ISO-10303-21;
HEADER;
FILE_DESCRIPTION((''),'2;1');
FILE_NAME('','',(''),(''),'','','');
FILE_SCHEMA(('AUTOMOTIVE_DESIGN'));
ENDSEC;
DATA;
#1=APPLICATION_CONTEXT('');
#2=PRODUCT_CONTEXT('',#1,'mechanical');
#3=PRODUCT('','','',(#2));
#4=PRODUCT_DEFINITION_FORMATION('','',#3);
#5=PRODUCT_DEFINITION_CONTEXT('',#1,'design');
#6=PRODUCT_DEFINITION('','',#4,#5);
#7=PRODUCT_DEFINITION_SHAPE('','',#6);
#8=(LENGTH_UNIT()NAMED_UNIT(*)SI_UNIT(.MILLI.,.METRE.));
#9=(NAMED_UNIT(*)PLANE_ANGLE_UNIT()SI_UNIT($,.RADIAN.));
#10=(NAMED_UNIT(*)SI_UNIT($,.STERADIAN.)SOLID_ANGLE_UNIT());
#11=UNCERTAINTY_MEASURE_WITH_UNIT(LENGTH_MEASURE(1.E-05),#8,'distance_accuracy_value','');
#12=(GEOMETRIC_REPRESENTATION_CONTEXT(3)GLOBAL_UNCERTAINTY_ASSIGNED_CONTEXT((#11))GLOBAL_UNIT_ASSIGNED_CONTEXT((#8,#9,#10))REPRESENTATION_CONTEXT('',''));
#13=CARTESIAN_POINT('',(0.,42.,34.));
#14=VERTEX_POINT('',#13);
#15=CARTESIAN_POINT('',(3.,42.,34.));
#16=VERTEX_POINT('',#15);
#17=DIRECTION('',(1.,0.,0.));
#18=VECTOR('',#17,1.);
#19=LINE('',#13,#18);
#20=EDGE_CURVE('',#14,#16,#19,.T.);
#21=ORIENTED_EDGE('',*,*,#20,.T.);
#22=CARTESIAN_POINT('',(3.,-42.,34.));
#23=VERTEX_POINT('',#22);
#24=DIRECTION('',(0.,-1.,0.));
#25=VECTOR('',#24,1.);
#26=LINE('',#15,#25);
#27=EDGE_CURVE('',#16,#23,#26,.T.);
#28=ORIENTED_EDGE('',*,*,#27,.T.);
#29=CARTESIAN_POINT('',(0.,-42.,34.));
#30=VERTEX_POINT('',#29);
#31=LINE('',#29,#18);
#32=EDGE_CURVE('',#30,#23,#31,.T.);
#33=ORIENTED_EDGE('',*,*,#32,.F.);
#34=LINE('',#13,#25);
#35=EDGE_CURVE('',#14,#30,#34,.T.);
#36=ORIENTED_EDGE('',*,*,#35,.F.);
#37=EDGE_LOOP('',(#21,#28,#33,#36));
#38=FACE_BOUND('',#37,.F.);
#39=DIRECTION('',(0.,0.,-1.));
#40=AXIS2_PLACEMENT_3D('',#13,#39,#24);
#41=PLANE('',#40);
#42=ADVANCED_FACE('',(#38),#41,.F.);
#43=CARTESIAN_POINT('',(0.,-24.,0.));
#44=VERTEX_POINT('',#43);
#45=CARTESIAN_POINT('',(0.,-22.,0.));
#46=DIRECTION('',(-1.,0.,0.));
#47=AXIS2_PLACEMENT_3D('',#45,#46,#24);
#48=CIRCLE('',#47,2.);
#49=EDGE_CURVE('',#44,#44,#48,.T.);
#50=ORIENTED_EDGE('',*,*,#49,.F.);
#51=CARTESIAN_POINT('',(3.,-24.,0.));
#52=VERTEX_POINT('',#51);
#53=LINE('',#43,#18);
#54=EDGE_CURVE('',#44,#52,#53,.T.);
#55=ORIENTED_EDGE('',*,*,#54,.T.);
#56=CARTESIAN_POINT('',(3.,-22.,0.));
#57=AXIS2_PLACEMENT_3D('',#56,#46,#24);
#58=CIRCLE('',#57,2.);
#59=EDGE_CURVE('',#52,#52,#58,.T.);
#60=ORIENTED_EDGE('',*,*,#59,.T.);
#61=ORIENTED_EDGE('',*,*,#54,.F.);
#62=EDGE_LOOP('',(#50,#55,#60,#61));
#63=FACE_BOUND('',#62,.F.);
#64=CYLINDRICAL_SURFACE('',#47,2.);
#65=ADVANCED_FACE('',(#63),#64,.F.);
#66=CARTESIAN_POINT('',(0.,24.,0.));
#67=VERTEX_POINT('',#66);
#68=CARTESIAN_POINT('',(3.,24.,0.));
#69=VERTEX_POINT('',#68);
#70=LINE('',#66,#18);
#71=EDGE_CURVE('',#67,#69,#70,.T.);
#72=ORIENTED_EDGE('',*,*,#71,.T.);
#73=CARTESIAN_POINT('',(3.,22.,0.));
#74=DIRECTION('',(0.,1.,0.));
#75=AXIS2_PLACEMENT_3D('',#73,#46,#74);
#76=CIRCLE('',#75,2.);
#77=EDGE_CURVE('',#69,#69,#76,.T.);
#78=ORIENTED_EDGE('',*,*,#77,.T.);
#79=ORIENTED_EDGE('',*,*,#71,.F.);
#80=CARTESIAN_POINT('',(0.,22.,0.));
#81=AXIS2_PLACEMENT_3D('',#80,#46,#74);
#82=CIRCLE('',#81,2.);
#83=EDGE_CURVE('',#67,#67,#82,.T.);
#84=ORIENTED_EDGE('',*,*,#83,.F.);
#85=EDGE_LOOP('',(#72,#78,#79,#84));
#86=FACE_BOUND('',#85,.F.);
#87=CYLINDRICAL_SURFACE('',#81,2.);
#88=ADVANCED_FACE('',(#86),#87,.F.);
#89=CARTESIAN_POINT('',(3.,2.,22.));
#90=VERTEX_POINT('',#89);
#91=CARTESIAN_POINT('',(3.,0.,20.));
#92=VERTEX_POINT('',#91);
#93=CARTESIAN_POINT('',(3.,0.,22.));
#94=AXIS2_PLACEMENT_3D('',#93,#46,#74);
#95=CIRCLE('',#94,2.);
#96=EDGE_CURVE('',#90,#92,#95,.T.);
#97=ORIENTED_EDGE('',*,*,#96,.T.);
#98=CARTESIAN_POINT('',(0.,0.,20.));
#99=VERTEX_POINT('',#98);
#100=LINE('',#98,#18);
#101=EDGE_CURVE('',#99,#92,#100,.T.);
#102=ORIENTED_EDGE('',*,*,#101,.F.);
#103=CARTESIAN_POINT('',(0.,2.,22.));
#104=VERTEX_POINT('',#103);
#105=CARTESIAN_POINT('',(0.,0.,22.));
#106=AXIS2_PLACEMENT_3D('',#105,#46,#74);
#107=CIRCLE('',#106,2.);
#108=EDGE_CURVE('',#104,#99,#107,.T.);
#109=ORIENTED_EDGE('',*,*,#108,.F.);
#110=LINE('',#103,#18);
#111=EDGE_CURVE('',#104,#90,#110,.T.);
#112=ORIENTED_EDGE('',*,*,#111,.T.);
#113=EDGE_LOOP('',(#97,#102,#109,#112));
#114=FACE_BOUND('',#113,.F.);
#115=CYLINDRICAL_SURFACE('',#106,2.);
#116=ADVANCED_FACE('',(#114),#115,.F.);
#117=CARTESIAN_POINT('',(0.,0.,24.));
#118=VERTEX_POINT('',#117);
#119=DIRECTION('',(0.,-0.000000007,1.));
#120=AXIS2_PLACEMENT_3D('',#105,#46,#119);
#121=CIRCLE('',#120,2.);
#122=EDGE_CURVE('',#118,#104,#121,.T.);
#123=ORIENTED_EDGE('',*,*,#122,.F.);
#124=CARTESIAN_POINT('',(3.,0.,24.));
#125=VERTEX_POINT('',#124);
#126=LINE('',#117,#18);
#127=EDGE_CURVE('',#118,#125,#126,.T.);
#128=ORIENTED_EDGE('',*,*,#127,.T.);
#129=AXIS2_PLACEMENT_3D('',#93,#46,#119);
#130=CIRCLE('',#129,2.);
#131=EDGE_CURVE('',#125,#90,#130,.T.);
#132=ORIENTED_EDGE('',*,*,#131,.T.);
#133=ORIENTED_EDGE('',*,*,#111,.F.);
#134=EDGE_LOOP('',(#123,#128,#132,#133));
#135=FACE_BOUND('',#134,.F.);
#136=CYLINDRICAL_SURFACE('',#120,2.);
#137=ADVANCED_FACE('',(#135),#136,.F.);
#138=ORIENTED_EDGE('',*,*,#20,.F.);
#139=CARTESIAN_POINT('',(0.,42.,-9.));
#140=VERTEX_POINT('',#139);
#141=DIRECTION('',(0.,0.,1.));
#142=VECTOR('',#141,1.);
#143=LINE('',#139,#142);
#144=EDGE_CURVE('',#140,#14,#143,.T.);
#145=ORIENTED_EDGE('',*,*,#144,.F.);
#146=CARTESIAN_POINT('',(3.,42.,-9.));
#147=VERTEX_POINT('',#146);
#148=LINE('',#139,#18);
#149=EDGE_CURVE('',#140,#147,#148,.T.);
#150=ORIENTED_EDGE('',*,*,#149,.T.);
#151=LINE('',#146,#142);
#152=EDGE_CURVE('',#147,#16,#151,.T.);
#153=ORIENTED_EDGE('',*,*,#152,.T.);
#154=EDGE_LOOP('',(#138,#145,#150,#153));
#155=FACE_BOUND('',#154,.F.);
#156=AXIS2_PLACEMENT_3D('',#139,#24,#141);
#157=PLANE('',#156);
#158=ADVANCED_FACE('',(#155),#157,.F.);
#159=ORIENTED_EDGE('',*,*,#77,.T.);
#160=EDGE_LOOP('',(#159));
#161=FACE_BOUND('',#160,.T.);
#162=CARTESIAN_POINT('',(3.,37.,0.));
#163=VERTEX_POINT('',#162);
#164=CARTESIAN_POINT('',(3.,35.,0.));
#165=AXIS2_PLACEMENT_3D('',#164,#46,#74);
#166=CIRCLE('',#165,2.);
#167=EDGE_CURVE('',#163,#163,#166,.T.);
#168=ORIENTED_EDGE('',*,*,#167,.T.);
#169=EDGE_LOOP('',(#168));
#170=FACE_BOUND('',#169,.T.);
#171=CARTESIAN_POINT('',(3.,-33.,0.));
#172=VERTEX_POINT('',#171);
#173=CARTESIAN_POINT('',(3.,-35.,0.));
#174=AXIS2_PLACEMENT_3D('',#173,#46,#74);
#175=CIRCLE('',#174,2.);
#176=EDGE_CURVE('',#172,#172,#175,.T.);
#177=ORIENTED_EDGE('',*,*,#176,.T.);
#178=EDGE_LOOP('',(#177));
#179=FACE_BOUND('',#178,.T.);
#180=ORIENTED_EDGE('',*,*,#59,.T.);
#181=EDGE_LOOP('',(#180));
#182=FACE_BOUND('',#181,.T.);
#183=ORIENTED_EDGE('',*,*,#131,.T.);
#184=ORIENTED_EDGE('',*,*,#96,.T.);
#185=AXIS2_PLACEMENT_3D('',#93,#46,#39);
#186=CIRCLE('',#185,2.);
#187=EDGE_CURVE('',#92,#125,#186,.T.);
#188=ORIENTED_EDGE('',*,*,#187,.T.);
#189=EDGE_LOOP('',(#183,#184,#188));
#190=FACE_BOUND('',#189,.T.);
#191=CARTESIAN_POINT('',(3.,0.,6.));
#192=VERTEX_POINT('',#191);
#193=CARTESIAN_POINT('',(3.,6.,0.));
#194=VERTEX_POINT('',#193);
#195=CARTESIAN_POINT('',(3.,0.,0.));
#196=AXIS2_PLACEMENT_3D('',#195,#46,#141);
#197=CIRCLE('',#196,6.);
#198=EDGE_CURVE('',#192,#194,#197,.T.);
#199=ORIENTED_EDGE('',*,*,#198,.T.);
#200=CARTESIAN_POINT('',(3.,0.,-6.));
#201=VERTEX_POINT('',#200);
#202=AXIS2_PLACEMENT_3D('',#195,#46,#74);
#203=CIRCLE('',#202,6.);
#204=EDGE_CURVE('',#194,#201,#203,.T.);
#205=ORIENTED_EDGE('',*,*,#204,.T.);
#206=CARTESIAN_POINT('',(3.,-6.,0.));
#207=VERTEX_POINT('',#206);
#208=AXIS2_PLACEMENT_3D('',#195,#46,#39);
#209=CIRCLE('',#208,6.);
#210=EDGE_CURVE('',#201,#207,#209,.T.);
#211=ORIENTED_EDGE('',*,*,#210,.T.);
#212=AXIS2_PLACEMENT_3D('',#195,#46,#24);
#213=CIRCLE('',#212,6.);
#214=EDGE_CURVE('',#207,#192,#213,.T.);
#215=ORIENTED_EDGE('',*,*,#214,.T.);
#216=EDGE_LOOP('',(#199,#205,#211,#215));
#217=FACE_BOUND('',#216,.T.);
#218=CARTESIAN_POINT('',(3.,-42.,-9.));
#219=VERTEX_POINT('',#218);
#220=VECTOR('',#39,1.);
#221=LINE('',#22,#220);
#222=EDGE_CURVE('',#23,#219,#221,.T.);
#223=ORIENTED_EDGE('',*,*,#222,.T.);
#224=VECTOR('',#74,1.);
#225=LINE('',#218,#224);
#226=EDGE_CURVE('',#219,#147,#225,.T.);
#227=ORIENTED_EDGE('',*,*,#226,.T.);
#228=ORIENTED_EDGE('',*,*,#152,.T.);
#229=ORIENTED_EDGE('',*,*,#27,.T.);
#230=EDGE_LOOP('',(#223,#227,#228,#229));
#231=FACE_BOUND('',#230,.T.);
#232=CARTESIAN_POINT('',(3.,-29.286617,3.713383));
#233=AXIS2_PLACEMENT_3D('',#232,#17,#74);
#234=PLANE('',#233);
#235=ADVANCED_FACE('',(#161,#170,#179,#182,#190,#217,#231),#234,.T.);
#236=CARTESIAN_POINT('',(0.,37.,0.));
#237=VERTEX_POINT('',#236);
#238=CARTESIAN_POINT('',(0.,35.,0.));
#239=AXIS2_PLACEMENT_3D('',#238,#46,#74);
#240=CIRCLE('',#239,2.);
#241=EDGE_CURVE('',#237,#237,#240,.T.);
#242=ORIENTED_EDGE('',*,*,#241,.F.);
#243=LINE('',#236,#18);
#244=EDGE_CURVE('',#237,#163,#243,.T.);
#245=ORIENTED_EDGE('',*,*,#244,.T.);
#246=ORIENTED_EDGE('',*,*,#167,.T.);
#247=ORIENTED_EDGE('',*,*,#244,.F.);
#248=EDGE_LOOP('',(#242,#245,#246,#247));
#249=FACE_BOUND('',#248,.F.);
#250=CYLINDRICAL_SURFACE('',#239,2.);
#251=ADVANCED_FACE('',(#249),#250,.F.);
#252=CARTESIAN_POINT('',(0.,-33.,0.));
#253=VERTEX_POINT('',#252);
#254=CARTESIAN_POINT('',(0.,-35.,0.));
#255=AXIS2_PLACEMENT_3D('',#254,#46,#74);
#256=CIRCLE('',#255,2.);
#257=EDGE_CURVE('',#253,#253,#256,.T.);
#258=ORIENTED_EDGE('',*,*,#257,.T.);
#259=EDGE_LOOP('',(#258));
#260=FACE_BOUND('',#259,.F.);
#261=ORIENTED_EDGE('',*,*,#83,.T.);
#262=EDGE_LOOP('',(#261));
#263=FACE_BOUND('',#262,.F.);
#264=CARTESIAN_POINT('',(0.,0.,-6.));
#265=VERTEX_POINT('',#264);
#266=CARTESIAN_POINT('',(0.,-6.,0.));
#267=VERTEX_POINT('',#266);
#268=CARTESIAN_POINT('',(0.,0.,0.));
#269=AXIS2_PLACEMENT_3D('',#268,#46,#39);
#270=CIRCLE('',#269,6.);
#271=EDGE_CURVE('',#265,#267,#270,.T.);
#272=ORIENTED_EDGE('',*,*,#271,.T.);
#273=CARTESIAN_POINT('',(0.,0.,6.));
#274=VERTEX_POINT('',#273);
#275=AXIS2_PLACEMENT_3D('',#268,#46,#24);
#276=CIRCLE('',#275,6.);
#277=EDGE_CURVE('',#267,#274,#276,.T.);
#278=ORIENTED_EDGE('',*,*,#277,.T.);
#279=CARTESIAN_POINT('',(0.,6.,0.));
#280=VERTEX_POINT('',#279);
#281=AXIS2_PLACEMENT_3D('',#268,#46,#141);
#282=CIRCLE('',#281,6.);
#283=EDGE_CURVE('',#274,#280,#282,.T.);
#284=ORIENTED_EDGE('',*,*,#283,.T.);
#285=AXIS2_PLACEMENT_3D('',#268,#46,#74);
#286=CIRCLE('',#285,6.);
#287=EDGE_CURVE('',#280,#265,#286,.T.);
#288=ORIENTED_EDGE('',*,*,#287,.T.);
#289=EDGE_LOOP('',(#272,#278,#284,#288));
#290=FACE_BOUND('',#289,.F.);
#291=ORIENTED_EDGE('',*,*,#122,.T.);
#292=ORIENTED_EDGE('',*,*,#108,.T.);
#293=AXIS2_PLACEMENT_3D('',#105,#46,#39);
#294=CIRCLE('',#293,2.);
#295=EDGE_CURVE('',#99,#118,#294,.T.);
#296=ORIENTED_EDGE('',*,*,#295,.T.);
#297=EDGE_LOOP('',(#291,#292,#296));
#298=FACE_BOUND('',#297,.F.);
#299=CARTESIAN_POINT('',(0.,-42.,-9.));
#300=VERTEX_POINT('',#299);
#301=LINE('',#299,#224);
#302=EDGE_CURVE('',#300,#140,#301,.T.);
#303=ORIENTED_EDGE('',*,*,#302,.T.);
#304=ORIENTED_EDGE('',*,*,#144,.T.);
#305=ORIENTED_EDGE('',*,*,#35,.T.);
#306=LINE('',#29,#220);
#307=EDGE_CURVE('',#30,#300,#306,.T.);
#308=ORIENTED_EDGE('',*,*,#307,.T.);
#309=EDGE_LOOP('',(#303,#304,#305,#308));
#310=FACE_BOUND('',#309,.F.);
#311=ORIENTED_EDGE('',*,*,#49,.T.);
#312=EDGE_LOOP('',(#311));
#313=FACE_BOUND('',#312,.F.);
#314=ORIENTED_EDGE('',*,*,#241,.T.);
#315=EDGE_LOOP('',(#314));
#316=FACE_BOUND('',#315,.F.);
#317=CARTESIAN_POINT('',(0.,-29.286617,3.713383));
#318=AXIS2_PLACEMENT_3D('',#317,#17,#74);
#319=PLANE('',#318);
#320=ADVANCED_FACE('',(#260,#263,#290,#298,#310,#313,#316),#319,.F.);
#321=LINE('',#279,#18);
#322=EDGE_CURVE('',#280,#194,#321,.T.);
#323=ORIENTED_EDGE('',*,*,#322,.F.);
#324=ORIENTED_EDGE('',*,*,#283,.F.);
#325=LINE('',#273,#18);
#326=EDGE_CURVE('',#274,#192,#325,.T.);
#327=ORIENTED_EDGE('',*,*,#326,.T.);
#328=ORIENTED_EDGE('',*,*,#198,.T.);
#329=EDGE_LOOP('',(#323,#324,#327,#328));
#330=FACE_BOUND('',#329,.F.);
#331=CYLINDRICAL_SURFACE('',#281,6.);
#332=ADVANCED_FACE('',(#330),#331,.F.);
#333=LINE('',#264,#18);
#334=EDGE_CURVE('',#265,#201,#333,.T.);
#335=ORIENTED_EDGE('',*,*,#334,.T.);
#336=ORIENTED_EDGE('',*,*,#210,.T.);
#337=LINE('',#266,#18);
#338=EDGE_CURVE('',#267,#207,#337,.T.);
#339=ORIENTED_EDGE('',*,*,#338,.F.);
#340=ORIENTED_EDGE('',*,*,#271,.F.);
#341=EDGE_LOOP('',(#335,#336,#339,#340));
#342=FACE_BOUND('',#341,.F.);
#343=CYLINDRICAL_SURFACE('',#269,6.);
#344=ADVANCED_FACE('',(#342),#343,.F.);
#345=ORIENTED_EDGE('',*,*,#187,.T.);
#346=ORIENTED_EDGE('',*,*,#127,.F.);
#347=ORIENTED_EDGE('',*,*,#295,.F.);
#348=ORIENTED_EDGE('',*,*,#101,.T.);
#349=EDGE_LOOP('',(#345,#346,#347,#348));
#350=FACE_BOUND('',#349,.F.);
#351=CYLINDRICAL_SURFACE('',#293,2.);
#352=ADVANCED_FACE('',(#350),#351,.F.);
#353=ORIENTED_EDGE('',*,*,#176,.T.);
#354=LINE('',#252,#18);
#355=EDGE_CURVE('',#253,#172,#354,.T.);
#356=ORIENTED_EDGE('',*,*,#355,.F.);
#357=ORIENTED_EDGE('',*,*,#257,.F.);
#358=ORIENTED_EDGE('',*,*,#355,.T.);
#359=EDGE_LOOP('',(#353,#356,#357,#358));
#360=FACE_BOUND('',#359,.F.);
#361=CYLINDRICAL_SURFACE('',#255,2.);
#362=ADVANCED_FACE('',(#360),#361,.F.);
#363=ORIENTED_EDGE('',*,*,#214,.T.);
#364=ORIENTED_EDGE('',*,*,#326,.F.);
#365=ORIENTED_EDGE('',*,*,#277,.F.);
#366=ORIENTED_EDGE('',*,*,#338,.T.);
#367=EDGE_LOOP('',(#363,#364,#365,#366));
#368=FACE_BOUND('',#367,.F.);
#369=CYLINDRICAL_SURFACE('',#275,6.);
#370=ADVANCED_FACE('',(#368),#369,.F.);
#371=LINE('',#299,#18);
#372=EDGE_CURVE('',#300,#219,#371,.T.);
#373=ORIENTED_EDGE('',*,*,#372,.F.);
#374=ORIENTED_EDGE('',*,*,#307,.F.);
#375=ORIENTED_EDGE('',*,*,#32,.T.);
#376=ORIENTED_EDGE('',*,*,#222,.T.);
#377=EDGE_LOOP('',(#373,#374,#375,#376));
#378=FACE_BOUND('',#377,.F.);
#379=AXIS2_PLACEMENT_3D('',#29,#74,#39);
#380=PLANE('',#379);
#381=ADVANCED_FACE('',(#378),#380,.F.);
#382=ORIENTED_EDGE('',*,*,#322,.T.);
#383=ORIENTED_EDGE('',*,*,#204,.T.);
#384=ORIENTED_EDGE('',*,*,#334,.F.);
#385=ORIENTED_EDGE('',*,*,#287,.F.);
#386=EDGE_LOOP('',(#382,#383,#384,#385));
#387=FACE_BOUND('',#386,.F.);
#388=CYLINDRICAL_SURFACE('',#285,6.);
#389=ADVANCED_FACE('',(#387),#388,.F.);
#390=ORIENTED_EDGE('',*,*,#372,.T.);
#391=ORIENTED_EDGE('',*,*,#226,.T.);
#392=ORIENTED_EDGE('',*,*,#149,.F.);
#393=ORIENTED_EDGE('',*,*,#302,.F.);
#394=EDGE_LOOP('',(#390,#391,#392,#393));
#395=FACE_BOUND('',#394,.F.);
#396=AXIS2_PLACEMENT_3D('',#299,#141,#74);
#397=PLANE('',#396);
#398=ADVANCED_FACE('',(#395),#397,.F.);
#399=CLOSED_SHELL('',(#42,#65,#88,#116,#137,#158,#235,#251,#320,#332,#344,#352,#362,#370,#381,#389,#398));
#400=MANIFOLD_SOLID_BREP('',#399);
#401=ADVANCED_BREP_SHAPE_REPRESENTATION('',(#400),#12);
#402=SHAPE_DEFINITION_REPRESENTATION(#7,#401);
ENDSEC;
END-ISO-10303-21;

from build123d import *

# Parameters (mm, degrees)
F1_DEPTH = 3


with BuildPart() as f1:
    # F0 (on Right) → F1 (new body)
    with BuildSketch(Plane.YZ):
        with BuildLine():
            Line((-33, 9), (-33, 0))
            Line((-33, 0), (-24, 0))
            ThreePointArc((-24, 0), (-26.6360389693, 6.3639610307), (-33, 9))
        make_face()
        with BuildLine():
            ThreePointArc((-37, 0), (-35, 2), (-33, 0))
            Line((-33, 0), (-33, 9))
            ThreePointArc((-33, 9), (-39.3639610307, 6.3639610307), (-42, 0))
            Line((-42, 0), (-37, 0))
        make_face()
        with BuildLine():
            Line((-24, 0), (-33, 0))
            Line((-33, 0), (-33, -9))
            ThreePointArc((-33, -9), (-26.6360389693, -6.3639610307), (-24, 0))
        make_face()
        with BuildLine():
            Line((-33, -9), (-33, 0))
            ThreePointArc((-33, 0), (-35, -2), (-37, 0))
            Line((-37, 0), (-42, 0))
            ThreePointArc((-42, 0), (-39.3639610307, -6.3639610307), (-33, -9))
        make_face()
        with BuildLine():
            ThreePointArc((-20, 0), (-22, -2), (-24, 0))
            ThreePointArc((-24, 0), (-26.6360389693, -6.3639610307), (-33, -9))
            Line((-33, -9), (-25, -9))
            Line((-25, -9), (-4.3588989435, -9))
            ThreePointArc((-4.3588989435, -9), (-8.4731632061, -5.310885546), (-10, 0))
            Line((-10, 0), (-20, 0))
        make_face()
        with BuildLine():
            ThreePointArc((-33, 9), (-26.6360389693, 6.3639610307), (-24, 0))
            ThreePointArc((-24, 0), (-22, 2), (-20, 0))
            Line((-20, 0), (-10, 0))
            ThreePointArc((-10, 0), (-7.0710678119, 7.0710678119), (0, 10))
            Line((0, 10), (0, 20))
            ThreePointArc((0, 20), (-2, 21.9999999928), (-1.44e-08, 24))
            ThreePointArc((-1.44e-08, 24), (-4.7434164964, 25.3514707334), (-8.0622577483, 29))
            Line((-8.0622577483, 29), (-9, 29))
            Line((-9, 29), (-9, 25))
            ThreePointArc((-9, 25), (-13.686291501, 13.686291501), (-25, 9))
            Line((-25, 9), (-33, 9))
        make_face()
        with BuildLine():
            ThreePointArc((-42, 0), (-39.3639610307, 6.3639610307), (-33, 9))
            Line((-33, 9), (-25, 9))
            ThreePointArc((-25, 9), (-13.686291501, 13.686291501), (-9, 25))
            Line((-9, 25), (-9, 29))
            Line((-9, 29), (-42, 29))
            Line((-42, 29), (-42, 0))
        make_face()
        with BuildLine():
            Line((-42, -9), (-33, -9))
            ThreePointArc((-33, -9), (-39.3639610307, -6.3639610307), (-42, 0))
            Line((-42, 0), (-42, -9))
        make_face()
        with BuildLine():
            ThreePointArc((0, 10), (-7.0710678119, 7.0710678119), (-10, 0))
            Line((-10, 0), (-6, 0))
            ThreePointArc((-6, 0), (-4.2426406871, 4.2426406871), (0, 6))
            Line((0, 6), (0, 10))
        make_face()
        with BuildLine():
            Line((-6, 0), (-10, 0))
            ThreePointArc((-10, 0), (-8.4731632061, -5.310885546), (-4.3588989435, -9))
            Line((-4.3588989435, -9), (0, -9))
            Line((0, -9), (0, -6))
            ThreePointArc((0, -6), (-4.2426406871, -4.2426406871), (-6, 0))
        make_face()
        with BuildLine():
            Line((-42, 34), (-42, 29))
            Line((-42, 29), (-9, 29))
            Line((-9, 29), (-9, 33))
            ThreePointArc((-9, 33), (-8.9860571774, 33.5007758031), (-8.94427191, 34))
            Line((-8.94427191, 34), (-42, 34))
        make_face()
        with BuildLine():
            ThreePointArc((10, 0), (7.0710678119, 7.0710678119), (0, 10))
            Line((0, 10), (0, 6))
            ThreePointArc((0, 6), (4.2426406871, 4.2426406871), (6, 0))
            Line((6, 0), (10, 0))
        make_face()
        with BuildLine():
            Line((0, 20), (0, 10))
            ThreePointArc((0, 10), (7.0710678119, 7.0710678119), (10, 0))
            Line((10, 0), (20, 0))
            ThreePointArc((20, 0), (22, 2), (24, 0))
            ThreePointArc((24, 0), (26.6360389693, 6.3639610307), (33, 9))
            Line((33, 9), (25, 9))
            ThreePointArc((25, 9), (13.686291501, 13.686291501), (9, 25))
            Line((9, 25), (9, 29))
            Line((9, 29), (8.0622577483, 29))
            ThreePointArc((8.0622577483, 29), (4.7434164841, 25.3514707258), (-1.44e-08, 24))
            ThreePointArc((-1.44e-08, 24), (1.4142135573, 23.4142135675), (2, 22))
            ThreePointArc((2, 22), (1.4142135624, 20.5857864376), (0, 20))
        make_face()
        with BuildLine():
            Line((-9, 33), (-9, 29))
            Line((-9, 29), (-8.0622577483, 29))
            ThreePointArc((-8.0622577483, 29), (-8.7624288794, 30.9457750531), (-9, 33))
        make_face()
        with BuildLine():
            Line((0, -6), (0, -9))
            Line((0, -9), (4.3588989435, -9))
            ThreePointArc((4.3588989435, -9), (8.4731632061, -5.310885546), (10, 0))
            Line((10, 0), (6, 0))
            ThreePointArc((6, 0), (4.2426406871, -4.2426406871), (0, -6))
        make_face()
        with BuildLine():
            Line((20, 0), (10, 0))
            ThreePointArc((10, 0), (8.4731632061, -5.310885546), (4.3588989435, -9))
            Line((4.3588989435, -9), (25, -9))
            Line((25, -9), (33, -9))
            ThreePointArc((33, -9), (26.6360389693, -6.3639610307), (24, 0))
            ThreePointArc((24, 0), (22, -2), (20, 0))
        make_face()
        with BuildLine():
            Line((0, 33), (-9, 33))
            ThreePointArc((-9, 33), (-8.7624288794, 30.9457750531), (-8.0622577483, 29))
            Line((-8.0622577483, 29), (0, 29))
            Line((0, 29), (0, 33))
        make_face()
        with BuildLine():
            ThreePointArc((-8.94427191, 34), (-8.9860571774, 33.5007758031), (-9, 33))
            Line((-9, 33), (0, 33))
            ThreePointArc((0, 33), (-1, 33.2679491924), (-1.7320508076, 34))
            Line((-1.7320508076, 34), (-8.94427191, 34))
        make_face()
        with BuildLine():
            Line((0, 29), (-8.0622577483, 29))
            ThreePointArc((-8.0622577483, 29), (-4.7434164964, 25.3514707334), (-1.44e-08, 24))
            Line((0, 24), (0, 29))
        make_face()
        with BuildLine():
            Line((0, 29), (0, 24))
            ThreePointArc((-1.44e-08, 24), (4.7434164841, 25.3514707258), (8.0622577483, 29))
            Line((8.0622577483, 29), (0, 29))
        make_face()
        with BuildLine():
            ThreePointArc((-1.7320508076, 34), (-1, 33.2679491924), (0, 33))
            Line((0, 33), (0, 34))
            Line((0, 34), (-1.7320508076, 34))
        make_face()
        with BuildLine():
            ThreePointArc((1.7320508076, 34), (1, 33.2679491924), (0, 33))
            Line((0, 33), (0, 29))
            Line((0, 29), (8.0622577483, 29))
            ThreePointArc((8.0622577483, 29), (8.7624288794, 30.9457750531), (9, 33))
            ThreePointArc((9, 33), (8.9860571774, 33.5007758031), (8.94427191, 34))
            Line((8.94427191, 34), (1.7320508076, 34))
        make_face()
        with BuildLine():
            Line((0, 34), (0, 33))
            ThreePointArc((0, 33), (1, 33.2679491924), (1.7320508076, 34))
            Line((1.7320508076, 34), (0, 34))
        make_face()
        with BuildLine():
            ThreePointArc((9, 33), (8.7624288794, 30.9457750531), (8.0622577483, 29))
            Line((8.0622577483, 29), (9, 29))
            Line((9, 29), (9, 33))
        make_face()
        with BuildLine():
            ThreePointArc((33, 9), (26.6360389693, 6.3639610307), (24, 0))
            Line((24, 0), (33, 0))
            ThreePointArc((33, 0), (35, 2), (37, 0))
            Line((37, 0), (42, 0))
            ThreePointArc((42, 0), (39.3639610307, 6.3639610307), (33, 9))
        make_face()
        with BuildLine():
            Line((33, 0), (24, 0))
            ThreePointArc((24, 0), (26.6360389693, -6.3639610307), (33, -9))
            Line((33, -9), (33, 0))
        make_face()
        with BuildLine():
            Line((42, 34), (8.94427191, 34))
            ThreePointArc((8.94427191, 34), (8.9860571774, 33.5007758031), (9, 33))
            Line((9, 33), (9, 29))
            Line((9, 29), (42, 29))
            Line((42, 29), (42, 34))
        make_face()
        with BuildLine():
            Line((33, 0), (33, -9))
            ThreePointArc((33, -9), (39.3639610307, -6.3639610307), (42, 0))
            Line((42, 0), (37, 0))
            ThreePointArc((37, 0), (35, -2), (33, 0))
        make_face()
        with BuildLine():
            ThreePointArc((42, 0), (39.3639610307, -6.3639610307), (33, -9))
            Line((33, -9), (42, -9))
            Line((42, -9), (42, 0))
        make_face()
        with BuildLine():
            Line((42, 29), (9, 29))
            Line((9, 29), (9, 25))
            ThreePointArc((9, 25), (13.686291501, 13.686291501), (25, 9))
            Line((25, 9), (33, 9))
            ThreePointArc((33, 9), (39.3639610307, 6.3639610307), (42, 0))
            Line((42, 0), (42, 29))
        make_face()
    extrude(amount=F1_DEPTH)


solid = f1.part
